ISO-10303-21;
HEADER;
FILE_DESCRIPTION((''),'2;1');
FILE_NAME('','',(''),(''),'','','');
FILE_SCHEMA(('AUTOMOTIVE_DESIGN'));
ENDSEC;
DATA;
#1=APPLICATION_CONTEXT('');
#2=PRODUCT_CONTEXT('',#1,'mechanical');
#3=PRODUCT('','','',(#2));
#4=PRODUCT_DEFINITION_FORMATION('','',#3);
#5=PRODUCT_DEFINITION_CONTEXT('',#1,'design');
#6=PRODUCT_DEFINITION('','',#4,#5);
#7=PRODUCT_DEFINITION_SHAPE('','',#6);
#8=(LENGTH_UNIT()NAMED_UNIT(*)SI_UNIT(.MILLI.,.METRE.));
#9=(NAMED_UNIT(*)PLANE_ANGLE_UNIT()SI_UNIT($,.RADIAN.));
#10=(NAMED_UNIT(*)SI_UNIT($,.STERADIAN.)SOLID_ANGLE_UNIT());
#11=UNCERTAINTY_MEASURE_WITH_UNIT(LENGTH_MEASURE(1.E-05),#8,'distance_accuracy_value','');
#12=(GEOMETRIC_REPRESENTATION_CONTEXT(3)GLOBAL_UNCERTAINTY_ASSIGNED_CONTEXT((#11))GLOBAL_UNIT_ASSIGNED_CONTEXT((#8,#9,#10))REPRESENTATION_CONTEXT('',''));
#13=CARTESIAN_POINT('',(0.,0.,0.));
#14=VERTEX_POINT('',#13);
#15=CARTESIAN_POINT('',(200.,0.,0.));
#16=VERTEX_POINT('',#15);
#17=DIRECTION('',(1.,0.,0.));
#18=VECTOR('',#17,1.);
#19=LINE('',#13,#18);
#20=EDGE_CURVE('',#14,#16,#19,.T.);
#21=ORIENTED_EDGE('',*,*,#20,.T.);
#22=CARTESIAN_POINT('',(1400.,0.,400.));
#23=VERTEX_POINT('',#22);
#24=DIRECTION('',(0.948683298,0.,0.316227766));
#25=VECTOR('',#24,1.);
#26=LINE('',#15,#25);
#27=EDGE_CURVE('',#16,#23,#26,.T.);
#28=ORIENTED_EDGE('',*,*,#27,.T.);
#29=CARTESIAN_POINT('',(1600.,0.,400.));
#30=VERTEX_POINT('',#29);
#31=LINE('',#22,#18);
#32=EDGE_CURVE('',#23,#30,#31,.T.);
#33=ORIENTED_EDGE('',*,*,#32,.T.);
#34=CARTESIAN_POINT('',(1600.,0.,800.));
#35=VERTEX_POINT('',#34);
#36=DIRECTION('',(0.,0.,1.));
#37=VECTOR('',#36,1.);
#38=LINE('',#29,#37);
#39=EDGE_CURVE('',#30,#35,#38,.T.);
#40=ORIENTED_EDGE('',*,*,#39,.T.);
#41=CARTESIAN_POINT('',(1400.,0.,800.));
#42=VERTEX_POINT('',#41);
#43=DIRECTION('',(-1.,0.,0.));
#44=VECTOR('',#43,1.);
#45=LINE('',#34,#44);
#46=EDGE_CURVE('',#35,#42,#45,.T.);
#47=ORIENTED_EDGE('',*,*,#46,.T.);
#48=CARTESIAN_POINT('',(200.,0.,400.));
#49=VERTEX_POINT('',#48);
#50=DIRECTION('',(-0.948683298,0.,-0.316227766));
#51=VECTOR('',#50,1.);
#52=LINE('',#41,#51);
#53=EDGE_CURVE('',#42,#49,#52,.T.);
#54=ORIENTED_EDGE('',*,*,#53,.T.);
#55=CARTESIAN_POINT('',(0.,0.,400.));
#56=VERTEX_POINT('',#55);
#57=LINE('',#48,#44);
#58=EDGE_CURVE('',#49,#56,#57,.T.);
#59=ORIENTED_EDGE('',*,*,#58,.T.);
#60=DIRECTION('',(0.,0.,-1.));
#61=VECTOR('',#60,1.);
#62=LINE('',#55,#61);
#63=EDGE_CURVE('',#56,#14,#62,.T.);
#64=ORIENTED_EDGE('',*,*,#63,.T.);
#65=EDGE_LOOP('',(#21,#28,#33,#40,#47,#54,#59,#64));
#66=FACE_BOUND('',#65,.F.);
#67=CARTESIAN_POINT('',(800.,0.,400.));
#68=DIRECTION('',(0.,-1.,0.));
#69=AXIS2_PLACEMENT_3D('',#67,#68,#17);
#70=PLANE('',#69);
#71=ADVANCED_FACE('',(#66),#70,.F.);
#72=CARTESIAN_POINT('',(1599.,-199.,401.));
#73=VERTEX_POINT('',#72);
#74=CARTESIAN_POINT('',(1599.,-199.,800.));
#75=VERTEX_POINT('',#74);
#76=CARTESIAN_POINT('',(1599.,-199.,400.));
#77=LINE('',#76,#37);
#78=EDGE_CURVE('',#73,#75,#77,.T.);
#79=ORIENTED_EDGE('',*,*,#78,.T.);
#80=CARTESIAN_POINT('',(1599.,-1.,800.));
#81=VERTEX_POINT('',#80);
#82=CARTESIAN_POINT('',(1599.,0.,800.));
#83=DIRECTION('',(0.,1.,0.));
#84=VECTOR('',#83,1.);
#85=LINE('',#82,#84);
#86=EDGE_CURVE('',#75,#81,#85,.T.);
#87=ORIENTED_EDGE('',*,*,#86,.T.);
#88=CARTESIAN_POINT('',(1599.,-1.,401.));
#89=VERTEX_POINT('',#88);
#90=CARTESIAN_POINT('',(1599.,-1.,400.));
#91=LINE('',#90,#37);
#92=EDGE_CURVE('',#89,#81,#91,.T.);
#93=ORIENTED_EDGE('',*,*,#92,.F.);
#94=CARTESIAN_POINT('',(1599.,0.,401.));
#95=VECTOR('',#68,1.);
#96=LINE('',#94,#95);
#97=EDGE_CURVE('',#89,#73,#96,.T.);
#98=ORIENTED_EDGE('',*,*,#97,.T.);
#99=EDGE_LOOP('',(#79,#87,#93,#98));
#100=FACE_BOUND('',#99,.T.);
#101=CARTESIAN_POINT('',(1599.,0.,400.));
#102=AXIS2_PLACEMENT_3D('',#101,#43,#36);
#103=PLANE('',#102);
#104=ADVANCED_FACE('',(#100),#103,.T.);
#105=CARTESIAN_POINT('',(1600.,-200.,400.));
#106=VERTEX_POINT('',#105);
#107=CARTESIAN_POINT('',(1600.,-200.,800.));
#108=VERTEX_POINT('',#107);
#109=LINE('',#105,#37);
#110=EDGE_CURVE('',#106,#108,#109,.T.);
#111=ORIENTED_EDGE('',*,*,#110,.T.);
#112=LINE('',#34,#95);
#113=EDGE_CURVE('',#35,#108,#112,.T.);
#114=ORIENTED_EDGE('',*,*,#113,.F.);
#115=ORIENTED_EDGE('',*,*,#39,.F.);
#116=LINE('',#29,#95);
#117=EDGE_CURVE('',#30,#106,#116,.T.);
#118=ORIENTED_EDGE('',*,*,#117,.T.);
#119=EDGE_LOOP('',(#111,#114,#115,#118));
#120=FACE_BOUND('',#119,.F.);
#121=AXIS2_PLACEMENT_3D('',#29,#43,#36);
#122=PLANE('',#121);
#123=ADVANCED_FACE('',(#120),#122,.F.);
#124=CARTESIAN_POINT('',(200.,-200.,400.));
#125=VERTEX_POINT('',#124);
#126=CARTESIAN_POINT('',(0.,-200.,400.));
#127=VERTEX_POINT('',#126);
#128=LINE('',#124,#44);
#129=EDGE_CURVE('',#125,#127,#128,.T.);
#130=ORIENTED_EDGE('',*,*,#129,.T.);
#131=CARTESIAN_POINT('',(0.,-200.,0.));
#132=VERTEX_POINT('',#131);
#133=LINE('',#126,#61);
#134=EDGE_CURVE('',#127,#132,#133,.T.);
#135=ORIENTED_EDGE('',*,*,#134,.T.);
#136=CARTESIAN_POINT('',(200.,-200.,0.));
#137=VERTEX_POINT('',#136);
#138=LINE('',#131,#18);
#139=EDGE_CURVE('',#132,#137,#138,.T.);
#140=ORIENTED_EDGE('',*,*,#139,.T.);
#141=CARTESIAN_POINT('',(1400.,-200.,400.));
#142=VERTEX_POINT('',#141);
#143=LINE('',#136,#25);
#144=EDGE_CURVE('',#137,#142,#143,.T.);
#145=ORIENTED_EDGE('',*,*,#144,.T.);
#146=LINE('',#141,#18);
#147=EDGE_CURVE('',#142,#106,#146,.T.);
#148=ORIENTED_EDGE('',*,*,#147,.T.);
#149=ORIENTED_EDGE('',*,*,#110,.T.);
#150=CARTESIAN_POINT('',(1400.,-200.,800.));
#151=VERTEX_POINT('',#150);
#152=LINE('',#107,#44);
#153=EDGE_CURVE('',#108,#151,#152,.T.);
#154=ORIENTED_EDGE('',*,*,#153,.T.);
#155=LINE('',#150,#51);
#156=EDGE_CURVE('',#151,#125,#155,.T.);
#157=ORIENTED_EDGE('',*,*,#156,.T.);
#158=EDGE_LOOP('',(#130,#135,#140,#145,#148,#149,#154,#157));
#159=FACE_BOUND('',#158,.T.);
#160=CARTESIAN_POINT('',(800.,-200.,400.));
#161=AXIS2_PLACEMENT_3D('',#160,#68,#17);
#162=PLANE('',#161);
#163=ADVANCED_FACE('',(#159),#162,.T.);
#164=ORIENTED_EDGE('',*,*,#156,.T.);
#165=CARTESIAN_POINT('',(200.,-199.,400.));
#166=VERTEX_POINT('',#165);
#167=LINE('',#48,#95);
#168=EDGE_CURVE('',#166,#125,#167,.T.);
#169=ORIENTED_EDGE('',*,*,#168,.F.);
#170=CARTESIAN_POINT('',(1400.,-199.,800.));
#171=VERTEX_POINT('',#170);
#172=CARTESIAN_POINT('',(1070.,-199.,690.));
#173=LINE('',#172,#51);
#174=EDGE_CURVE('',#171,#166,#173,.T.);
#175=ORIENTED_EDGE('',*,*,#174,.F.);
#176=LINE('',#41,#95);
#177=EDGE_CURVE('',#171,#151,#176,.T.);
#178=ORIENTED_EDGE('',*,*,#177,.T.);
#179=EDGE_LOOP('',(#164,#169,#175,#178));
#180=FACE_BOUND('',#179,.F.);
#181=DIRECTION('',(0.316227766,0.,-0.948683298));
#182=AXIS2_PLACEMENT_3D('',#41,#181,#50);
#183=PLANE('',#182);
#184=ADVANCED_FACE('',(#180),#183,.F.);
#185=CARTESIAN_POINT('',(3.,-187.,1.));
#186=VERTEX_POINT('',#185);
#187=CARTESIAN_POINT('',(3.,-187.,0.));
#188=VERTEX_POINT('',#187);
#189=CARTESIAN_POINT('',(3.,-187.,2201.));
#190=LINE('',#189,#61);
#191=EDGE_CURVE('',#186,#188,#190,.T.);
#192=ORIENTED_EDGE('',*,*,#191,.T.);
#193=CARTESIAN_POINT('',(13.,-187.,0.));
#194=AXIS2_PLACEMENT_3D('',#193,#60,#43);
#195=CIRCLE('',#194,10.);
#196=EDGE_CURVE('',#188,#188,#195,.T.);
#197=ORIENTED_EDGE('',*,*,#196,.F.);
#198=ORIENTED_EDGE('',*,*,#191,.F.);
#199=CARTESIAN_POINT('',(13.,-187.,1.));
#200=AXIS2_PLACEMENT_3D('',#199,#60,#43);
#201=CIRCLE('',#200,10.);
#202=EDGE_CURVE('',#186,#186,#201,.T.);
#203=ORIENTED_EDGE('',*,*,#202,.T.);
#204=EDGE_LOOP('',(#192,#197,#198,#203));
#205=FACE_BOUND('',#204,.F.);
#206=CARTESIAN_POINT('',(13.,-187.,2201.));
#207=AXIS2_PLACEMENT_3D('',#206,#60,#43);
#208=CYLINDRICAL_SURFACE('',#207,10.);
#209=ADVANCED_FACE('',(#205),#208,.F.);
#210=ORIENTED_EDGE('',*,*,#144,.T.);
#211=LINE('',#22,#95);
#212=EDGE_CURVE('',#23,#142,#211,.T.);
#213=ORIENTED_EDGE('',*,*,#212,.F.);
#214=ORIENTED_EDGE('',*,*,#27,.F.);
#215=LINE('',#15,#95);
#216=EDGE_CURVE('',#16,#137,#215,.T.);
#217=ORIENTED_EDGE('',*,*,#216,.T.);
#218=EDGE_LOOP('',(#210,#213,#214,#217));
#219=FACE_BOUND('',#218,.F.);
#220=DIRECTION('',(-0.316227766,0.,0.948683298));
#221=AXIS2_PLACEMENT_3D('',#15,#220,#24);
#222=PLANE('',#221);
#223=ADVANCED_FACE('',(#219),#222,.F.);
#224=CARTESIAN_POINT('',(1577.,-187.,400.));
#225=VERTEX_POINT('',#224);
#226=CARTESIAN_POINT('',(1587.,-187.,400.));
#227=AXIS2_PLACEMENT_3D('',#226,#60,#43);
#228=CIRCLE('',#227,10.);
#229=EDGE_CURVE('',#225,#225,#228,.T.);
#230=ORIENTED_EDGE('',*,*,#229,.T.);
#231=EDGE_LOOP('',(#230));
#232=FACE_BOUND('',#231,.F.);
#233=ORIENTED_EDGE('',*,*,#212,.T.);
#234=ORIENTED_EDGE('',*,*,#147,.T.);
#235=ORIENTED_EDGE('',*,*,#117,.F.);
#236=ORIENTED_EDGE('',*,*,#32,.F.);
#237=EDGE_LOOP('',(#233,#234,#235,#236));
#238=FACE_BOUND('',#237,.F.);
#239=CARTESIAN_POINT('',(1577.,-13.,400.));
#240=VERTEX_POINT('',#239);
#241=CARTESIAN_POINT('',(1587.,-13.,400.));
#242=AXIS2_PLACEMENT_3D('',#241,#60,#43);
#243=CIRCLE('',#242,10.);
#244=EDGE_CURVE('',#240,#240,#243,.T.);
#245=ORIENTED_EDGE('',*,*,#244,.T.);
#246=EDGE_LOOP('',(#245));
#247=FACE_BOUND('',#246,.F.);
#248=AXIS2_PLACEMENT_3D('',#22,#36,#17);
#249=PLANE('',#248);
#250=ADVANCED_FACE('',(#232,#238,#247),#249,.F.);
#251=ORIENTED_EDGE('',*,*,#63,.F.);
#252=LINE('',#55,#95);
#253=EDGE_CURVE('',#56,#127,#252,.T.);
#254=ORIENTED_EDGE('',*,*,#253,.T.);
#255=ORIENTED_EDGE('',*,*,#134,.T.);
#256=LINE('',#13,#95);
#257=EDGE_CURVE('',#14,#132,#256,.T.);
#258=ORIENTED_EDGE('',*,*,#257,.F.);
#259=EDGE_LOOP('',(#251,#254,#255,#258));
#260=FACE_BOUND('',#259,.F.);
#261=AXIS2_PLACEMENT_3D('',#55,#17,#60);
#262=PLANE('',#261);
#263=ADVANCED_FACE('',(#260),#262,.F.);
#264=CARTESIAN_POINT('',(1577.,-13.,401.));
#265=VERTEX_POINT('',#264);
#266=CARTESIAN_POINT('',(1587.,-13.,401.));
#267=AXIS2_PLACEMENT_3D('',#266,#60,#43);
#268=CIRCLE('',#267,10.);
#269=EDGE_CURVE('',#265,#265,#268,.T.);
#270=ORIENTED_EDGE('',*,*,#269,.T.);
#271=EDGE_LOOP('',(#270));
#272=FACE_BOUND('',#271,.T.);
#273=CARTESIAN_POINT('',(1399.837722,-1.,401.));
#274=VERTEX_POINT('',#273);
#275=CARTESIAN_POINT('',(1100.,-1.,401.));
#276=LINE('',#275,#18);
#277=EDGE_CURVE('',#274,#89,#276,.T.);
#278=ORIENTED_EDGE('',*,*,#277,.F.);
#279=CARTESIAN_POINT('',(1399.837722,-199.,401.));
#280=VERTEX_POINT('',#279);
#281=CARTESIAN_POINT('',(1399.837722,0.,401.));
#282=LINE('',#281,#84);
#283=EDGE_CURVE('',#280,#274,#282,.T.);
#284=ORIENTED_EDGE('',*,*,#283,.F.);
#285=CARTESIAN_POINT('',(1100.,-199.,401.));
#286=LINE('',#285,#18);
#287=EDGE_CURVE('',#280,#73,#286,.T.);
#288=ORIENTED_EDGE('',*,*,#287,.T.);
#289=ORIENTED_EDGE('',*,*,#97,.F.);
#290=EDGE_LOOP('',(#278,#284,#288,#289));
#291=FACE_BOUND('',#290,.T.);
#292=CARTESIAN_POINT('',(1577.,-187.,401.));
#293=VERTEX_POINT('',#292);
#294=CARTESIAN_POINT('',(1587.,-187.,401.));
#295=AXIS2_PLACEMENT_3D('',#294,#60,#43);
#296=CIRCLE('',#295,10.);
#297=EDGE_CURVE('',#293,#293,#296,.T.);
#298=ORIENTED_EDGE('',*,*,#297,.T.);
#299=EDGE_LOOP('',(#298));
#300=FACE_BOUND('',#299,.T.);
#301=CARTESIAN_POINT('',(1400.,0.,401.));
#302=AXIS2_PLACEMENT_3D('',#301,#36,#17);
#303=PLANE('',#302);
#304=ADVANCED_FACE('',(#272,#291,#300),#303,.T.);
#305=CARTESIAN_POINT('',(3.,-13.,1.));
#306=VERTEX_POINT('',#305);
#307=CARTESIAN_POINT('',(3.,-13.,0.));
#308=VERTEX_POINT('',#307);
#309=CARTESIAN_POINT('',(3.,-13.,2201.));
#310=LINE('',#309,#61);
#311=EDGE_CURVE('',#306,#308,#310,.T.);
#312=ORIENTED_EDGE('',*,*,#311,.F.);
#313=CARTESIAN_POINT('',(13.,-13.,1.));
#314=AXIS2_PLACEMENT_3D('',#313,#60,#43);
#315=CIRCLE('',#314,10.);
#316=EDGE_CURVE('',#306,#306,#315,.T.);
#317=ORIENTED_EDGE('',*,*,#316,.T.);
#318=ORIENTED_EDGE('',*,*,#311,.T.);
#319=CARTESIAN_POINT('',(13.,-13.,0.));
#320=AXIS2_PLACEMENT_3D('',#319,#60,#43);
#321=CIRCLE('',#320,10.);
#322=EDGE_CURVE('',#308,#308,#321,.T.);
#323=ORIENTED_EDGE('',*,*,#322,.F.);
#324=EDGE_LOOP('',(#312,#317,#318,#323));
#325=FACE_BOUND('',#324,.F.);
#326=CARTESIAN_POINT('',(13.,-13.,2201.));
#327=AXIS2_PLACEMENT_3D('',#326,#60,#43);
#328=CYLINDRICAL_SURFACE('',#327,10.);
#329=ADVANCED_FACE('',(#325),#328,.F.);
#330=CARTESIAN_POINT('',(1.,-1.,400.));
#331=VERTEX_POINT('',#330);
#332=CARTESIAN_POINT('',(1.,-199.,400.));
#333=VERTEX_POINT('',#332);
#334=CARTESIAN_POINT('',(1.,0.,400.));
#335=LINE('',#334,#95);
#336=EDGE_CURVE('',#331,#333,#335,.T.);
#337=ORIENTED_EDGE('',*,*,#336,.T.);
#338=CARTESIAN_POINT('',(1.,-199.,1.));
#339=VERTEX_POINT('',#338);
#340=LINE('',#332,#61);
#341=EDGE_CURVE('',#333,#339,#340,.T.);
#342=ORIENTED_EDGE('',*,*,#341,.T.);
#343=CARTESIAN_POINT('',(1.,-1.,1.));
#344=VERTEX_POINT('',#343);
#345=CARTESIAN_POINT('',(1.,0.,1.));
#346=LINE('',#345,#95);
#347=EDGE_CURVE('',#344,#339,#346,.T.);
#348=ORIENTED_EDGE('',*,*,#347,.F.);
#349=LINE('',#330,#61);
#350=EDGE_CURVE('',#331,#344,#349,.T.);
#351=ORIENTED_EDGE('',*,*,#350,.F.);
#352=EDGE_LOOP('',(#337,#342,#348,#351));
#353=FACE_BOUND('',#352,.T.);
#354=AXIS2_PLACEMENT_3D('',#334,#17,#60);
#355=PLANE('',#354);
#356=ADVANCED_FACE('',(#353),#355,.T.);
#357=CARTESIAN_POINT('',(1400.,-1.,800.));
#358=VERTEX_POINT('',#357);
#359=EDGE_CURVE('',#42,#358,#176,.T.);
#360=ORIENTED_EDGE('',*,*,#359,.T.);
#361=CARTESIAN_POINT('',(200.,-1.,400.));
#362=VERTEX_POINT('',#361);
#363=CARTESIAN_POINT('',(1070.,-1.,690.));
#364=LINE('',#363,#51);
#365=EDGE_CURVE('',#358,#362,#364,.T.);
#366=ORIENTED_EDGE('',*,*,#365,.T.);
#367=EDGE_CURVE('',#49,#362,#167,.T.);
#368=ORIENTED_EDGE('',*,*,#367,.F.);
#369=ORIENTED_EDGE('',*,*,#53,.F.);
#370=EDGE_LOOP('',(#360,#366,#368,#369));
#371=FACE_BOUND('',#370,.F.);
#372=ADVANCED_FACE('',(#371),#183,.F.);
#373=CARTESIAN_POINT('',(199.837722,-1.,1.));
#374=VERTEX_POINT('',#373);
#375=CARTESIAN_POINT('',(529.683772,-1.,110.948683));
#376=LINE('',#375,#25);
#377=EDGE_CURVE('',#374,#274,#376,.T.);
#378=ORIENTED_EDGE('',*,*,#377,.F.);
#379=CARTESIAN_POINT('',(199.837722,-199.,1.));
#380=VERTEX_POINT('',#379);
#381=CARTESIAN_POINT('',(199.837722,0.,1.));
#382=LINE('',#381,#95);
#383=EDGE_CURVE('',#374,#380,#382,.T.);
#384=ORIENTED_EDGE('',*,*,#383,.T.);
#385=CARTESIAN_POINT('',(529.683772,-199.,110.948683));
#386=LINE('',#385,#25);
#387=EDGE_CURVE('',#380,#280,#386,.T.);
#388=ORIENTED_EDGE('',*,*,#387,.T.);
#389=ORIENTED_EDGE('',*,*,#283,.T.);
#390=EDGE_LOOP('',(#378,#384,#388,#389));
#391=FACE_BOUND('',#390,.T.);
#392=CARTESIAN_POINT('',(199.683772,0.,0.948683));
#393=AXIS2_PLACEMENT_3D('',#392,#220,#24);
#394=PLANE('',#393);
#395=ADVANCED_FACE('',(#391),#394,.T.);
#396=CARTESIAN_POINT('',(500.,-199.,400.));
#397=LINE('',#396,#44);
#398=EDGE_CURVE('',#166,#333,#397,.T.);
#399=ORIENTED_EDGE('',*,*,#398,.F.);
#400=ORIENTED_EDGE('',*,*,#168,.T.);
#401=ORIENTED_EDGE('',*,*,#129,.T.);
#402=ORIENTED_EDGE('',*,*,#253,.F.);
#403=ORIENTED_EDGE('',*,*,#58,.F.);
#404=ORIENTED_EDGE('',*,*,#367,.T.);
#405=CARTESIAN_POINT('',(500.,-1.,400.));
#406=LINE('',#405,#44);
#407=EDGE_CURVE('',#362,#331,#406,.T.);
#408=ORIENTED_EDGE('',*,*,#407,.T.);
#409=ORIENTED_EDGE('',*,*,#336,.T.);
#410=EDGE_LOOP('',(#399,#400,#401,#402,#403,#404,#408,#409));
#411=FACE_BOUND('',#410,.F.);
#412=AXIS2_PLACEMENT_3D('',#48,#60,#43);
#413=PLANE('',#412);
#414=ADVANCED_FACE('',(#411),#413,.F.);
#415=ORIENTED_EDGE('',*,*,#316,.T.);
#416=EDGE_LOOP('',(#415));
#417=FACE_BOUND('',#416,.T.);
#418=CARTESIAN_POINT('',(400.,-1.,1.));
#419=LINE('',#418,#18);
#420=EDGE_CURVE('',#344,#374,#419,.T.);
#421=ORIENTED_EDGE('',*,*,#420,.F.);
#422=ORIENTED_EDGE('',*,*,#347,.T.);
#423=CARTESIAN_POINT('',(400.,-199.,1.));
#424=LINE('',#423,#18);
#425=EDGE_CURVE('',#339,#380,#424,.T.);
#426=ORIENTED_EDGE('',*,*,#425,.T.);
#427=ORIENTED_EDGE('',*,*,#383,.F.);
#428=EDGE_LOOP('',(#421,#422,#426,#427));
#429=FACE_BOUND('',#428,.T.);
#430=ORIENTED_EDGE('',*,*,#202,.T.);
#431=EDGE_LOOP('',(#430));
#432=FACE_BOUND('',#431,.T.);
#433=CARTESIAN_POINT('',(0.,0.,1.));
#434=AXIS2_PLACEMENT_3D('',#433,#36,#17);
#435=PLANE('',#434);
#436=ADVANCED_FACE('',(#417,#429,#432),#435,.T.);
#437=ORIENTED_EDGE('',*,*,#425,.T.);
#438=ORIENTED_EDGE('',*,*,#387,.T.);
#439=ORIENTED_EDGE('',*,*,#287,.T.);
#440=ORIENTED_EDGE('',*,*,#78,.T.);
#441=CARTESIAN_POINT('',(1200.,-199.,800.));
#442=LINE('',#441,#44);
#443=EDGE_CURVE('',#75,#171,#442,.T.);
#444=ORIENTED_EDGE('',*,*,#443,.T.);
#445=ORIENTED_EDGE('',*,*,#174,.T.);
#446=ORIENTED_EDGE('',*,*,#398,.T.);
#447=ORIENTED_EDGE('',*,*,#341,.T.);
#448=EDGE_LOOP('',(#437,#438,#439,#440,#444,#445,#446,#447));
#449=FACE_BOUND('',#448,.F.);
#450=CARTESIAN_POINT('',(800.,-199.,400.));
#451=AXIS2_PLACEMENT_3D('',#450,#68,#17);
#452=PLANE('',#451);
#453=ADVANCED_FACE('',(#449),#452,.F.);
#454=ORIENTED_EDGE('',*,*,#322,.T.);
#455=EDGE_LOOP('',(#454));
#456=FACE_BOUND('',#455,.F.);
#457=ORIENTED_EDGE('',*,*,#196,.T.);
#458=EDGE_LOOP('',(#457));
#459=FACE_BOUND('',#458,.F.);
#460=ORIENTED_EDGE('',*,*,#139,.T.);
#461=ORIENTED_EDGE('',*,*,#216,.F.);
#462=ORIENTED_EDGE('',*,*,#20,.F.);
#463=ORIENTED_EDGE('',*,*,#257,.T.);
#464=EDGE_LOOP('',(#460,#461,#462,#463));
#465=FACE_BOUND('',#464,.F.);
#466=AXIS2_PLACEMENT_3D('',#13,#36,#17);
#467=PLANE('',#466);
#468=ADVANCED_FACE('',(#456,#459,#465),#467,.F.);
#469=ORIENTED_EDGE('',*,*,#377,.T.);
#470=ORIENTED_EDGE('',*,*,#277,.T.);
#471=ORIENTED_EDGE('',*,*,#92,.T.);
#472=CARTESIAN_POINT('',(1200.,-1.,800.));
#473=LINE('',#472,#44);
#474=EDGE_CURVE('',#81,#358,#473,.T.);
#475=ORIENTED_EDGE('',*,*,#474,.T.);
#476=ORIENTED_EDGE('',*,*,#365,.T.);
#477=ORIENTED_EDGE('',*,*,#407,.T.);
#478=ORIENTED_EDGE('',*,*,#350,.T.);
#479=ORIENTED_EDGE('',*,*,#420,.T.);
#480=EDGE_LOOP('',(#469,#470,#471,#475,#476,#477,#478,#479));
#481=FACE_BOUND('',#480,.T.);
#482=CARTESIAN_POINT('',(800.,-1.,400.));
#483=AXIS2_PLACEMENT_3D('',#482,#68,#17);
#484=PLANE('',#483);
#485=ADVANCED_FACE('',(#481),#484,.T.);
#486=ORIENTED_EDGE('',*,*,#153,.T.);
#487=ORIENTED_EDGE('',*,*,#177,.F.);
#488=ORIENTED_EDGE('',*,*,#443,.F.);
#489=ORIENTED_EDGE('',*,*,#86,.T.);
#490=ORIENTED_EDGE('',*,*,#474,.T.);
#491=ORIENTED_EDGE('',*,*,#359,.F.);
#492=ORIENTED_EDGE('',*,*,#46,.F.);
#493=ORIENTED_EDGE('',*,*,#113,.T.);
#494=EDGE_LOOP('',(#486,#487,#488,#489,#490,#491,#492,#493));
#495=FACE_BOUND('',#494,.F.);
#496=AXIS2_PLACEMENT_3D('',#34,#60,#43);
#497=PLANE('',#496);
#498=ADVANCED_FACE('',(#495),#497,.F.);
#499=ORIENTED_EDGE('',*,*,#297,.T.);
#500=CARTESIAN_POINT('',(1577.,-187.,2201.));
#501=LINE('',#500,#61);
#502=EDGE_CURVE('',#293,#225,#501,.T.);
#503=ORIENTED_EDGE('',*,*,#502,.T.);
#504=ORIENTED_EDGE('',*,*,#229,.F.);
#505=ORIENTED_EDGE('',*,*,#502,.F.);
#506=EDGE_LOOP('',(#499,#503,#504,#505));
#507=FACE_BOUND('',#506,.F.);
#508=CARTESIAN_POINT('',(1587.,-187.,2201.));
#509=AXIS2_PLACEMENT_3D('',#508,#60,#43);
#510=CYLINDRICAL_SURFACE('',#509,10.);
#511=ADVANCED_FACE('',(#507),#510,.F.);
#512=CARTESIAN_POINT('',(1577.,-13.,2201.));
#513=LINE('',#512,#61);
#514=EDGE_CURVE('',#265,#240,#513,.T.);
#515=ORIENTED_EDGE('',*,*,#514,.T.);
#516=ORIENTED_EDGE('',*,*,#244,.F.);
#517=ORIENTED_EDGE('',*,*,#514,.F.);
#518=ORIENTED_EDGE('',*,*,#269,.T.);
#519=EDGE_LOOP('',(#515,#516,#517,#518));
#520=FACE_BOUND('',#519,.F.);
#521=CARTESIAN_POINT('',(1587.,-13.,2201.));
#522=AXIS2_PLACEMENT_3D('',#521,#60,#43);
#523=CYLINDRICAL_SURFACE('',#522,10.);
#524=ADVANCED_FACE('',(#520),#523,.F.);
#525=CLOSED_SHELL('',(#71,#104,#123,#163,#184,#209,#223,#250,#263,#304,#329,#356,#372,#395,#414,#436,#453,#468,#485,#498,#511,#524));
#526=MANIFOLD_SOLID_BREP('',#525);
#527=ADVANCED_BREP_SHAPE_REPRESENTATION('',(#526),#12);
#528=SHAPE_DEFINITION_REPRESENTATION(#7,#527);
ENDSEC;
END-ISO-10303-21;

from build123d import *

# Parameters (mm, degrees)
F1_DEPTH = 200
F2_T     = -1
F6_D     = 20
F7_D     = 20


# Not quite as in the source:
# - the program builds the solid bodies; features that only make, move or delete a surface that nothing else refers to are left out


with BuildPart() as f1:
    # F0 (on Front) → F1 (new body)
    with BuildSketch(Plane.XZ):
        Polygon((0, 400), (0, 0), (200, 0), (1400, 400), (1600, 400), (1600, 800), (1400, 800), (200, 400), align=None)
    extrude(amount=F1_DEPTH)

    # F2
    f2_openings = [f1.faces().sort_by_distance(p)[0] for p in [
        (100, -100, 400),
        (1500, -100, 800),
        (800, -100, 600),
    ]]
    offset(amount=F2_T, openings=f2_openings, kind=Kind.INTERSECTION)

    # F6 (through all)
    with Locations(Plane.XY.offset(401)):
        with Locations((13, -187), (13, -13)):
            Hole(F6_D / 2)

    # F7 (through all)
    with Locations(Plane.XY.offset(401)):
        with Locations((1587, -13), (1587, -187)):
            Hole(F7_D / 2)


solid = f1.part
